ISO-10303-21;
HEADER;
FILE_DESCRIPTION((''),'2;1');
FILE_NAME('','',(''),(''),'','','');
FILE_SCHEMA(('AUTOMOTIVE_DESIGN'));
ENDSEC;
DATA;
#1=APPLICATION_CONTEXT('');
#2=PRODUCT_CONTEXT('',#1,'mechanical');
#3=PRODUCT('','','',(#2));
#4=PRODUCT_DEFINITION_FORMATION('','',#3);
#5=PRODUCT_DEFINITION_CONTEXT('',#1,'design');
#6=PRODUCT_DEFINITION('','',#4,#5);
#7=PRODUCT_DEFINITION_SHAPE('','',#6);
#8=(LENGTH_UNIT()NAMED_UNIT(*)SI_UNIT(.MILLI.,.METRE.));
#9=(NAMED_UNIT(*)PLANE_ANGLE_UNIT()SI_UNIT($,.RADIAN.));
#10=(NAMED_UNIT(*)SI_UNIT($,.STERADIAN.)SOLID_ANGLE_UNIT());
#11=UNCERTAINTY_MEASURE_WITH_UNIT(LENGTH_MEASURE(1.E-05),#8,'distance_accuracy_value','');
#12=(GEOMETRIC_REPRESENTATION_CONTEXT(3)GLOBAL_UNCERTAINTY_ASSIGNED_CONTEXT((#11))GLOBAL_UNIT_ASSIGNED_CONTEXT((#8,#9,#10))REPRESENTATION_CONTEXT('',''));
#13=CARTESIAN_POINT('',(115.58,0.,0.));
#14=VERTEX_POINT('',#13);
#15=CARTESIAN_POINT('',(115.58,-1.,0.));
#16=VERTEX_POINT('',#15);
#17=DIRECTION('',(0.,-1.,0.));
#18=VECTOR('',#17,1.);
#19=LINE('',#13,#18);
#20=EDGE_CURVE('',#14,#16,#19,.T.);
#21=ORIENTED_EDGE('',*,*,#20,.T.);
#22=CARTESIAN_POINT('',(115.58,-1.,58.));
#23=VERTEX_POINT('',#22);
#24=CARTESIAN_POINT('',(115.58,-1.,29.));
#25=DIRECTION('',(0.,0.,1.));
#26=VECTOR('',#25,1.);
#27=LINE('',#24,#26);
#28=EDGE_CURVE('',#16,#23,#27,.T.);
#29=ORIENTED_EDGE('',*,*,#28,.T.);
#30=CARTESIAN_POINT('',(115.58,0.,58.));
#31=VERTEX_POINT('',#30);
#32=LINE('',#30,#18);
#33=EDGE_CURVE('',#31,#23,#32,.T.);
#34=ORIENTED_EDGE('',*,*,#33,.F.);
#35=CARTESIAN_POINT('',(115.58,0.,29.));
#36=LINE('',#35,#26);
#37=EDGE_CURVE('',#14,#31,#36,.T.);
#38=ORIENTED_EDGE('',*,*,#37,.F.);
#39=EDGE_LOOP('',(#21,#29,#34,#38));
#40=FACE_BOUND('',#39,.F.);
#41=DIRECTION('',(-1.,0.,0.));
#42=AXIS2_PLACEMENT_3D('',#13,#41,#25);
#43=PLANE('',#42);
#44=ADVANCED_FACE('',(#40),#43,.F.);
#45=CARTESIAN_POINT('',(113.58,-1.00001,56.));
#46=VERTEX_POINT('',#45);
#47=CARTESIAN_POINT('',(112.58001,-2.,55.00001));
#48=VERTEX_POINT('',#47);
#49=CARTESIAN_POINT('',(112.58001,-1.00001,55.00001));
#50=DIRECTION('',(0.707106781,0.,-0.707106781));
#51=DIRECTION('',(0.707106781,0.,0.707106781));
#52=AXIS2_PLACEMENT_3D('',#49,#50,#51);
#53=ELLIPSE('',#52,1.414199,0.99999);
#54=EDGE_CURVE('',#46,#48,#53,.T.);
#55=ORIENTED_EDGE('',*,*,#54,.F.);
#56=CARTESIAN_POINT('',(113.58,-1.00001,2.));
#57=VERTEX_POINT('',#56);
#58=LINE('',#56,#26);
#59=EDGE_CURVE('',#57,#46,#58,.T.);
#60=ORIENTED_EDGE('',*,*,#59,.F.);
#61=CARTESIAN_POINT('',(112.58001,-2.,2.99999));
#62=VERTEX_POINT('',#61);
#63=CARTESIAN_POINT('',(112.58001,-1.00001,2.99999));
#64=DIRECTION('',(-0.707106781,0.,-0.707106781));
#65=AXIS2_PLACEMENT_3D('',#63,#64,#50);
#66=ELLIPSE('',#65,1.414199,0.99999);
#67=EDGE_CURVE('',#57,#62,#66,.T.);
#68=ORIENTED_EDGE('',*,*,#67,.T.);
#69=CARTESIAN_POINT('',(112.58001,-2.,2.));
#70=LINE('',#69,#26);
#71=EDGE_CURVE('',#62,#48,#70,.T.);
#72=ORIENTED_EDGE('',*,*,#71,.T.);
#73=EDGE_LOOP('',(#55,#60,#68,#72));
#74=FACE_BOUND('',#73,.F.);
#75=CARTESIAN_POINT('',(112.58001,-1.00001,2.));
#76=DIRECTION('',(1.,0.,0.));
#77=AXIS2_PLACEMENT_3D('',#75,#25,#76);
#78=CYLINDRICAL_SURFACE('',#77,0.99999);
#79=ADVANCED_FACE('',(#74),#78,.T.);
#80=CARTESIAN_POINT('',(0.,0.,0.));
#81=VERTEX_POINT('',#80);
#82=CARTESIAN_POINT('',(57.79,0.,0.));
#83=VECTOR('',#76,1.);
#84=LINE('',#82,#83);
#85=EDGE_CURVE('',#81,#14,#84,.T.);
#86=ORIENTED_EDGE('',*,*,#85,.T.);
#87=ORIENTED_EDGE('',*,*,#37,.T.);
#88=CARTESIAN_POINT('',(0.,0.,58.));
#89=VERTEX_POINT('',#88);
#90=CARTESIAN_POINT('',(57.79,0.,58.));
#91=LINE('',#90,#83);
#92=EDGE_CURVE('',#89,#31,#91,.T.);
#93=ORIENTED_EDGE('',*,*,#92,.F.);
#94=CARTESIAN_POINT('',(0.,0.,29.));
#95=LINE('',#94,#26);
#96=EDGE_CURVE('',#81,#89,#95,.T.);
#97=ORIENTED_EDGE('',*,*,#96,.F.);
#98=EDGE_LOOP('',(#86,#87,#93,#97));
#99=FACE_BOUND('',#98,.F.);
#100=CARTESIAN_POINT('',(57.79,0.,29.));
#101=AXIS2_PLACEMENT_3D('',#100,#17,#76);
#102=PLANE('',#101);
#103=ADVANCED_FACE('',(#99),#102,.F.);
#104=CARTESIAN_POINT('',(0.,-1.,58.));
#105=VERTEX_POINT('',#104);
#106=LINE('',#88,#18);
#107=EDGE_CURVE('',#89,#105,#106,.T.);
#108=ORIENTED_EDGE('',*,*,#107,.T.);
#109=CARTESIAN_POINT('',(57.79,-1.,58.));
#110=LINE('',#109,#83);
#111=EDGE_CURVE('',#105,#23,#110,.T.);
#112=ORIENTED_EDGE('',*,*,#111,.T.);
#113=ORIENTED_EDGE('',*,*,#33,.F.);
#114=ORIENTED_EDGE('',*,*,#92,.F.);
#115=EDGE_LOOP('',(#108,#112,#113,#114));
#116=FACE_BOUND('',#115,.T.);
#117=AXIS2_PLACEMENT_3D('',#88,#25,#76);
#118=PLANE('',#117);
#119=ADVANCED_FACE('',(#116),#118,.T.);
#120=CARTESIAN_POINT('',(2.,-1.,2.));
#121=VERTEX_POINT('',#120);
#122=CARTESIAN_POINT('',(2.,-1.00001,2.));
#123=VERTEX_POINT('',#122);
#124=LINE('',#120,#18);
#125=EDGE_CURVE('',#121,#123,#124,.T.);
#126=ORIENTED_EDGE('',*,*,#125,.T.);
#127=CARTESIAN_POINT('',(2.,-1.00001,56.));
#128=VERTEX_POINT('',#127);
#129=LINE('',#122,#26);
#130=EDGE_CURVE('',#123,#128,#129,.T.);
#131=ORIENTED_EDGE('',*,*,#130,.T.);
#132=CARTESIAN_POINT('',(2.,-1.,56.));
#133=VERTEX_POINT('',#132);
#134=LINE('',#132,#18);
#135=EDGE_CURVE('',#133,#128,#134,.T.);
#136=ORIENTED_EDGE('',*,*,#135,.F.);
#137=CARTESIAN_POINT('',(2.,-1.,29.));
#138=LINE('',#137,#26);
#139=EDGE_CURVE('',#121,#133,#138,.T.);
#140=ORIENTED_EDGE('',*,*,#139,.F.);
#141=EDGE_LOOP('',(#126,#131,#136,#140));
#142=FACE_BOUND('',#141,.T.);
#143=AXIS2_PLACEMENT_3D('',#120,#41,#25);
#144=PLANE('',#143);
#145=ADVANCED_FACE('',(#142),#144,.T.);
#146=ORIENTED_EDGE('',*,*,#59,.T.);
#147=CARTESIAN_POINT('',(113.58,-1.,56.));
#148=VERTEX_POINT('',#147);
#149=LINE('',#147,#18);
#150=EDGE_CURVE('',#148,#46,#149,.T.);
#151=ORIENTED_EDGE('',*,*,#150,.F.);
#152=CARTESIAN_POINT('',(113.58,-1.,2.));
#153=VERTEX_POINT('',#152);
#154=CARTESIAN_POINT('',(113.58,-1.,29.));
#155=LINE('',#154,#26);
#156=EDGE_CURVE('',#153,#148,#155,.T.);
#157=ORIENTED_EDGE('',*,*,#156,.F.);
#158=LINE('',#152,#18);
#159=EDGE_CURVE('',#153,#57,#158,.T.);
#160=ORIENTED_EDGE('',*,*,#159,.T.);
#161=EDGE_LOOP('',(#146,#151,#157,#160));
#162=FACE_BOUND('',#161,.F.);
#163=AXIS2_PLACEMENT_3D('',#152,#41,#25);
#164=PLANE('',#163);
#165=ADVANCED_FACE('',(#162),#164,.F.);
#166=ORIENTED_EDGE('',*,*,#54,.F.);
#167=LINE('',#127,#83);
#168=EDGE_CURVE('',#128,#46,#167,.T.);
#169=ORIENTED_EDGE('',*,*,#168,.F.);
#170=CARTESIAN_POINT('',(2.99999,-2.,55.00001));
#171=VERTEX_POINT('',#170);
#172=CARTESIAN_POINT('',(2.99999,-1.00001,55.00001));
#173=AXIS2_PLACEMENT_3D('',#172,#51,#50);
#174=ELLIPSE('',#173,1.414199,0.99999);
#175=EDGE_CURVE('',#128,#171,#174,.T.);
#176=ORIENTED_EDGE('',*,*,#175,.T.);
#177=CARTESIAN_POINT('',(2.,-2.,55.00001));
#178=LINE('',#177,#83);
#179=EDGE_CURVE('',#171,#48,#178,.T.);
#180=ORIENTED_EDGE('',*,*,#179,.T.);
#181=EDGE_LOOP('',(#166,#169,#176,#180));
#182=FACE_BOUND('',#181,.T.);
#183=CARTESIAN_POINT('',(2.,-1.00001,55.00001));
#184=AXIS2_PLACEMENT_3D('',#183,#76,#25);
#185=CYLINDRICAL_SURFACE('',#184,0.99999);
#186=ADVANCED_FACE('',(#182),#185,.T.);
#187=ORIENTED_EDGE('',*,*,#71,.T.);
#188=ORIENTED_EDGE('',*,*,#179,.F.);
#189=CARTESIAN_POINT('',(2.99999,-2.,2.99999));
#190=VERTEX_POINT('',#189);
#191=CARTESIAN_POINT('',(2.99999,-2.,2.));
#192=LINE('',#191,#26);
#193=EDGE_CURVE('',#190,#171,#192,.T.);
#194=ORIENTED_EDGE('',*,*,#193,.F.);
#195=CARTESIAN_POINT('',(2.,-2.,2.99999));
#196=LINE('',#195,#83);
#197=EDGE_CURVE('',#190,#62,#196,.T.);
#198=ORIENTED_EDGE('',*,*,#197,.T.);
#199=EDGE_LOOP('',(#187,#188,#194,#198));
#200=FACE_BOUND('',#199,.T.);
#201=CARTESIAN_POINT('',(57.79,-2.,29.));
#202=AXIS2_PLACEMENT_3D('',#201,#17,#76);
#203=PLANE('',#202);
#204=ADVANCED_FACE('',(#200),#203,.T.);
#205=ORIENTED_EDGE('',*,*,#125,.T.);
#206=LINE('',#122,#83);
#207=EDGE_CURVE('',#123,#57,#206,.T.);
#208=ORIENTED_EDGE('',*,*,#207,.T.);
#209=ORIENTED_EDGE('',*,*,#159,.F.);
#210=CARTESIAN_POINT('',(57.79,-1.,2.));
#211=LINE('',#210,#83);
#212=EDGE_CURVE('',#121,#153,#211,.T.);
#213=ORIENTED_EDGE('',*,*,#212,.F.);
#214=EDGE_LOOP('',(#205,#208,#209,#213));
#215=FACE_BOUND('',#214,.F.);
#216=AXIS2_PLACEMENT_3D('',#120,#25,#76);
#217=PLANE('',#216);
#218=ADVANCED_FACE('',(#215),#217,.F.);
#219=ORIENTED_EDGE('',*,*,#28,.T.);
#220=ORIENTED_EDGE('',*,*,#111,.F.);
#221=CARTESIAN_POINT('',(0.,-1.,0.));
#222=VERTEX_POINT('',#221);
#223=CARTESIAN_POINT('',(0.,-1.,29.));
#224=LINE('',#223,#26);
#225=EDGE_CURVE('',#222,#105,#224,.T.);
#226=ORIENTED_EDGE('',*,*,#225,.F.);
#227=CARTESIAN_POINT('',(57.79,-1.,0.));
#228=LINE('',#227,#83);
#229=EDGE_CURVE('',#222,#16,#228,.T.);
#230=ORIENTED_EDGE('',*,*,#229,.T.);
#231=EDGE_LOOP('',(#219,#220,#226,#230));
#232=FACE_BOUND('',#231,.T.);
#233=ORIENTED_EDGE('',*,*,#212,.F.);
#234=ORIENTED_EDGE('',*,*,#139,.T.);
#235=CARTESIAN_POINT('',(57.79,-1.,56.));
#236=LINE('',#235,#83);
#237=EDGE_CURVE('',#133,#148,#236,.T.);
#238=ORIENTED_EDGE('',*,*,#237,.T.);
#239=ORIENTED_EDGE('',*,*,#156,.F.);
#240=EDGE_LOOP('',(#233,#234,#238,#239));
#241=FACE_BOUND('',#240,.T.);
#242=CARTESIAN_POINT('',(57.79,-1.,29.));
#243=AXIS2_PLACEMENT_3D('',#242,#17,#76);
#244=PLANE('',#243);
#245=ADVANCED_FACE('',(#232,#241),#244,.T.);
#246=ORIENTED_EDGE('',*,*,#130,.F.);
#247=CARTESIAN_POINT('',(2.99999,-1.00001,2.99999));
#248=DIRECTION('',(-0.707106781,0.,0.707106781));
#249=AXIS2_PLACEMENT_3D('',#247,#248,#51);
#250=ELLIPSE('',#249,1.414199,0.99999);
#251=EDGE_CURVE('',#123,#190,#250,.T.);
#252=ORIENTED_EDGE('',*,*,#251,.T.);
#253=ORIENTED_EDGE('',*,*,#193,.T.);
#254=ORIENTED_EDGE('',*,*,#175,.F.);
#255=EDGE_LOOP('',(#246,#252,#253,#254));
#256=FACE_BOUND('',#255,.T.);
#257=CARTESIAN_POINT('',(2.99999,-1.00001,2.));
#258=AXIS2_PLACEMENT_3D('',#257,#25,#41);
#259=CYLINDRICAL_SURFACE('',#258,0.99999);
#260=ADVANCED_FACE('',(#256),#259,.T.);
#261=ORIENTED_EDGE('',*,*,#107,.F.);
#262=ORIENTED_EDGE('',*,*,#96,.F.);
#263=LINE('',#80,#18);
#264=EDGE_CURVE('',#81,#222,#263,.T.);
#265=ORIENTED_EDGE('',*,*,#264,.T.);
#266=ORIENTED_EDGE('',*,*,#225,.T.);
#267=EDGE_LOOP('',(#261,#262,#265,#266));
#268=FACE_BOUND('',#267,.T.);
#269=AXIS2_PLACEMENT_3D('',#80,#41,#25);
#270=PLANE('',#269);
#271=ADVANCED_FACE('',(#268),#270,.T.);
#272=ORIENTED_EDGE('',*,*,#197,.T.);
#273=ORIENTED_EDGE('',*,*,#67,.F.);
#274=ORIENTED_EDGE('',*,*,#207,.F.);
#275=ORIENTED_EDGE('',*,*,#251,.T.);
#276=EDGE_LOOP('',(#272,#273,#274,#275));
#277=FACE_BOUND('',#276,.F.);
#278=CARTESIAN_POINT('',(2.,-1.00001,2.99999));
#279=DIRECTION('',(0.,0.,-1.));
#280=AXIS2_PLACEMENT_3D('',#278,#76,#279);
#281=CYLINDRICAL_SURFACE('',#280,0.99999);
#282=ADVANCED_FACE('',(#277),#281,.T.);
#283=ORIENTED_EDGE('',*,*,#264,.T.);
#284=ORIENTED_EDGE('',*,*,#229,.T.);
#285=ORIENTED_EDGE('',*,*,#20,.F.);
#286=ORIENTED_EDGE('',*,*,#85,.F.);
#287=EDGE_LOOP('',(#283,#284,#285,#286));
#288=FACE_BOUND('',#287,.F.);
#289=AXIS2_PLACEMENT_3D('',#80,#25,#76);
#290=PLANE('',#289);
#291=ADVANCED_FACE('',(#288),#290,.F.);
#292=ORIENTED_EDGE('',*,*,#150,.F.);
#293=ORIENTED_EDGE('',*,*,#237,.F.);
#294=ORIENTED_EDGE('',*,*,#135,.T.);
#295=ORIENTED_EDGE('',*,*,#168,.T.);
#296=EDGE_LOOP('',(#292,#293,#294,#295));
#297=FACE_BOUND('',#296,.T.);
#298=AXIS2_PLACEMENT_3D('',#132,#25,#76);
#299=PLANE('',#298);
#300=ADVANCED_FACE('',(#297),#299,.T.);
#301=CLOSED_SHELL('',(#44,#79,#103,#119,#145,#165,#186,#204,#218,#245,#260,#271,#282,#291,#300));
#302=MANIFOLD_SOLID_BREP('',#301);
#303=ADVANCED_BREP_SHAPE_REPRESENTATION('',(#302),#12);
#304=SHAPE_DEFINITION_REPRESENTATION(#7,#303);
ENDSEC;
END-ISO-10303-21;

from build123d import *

# Parameters (mm, degrees)
F0_W     = 115.58
F0_H     = 58
F1_DEPTH = 1
F2_W     = 111.58
F2_H     = 54
F3_DEPTH = 1
F4_R     = 0.99999


# Not quite as in the source:
# - a fillet or chamfer is up to 0.001 mm smaller than in the source, because OpenCascade refuses the exact size
# - a feature names something its author has since deleted; it is built from what else it names


with BuildPart() as f1:
    # F0 (on Front) → F1 (new body)
    with BuildSketch(Plane.XZ):
        with Locations((57.79, 29)):
            Rectangle(F0_W, F0_H)
    extrude(amount=F1_DEPTH)

    # F2 (on face) → F3 (join)
    with BuildSketch(Plane.XZ.offset(1)):
        with Locations((57.79, 29)):
            Rectangle(F2_W, F2_H)
    extrude(amount=F3_DEPTH)

    # F4 (radius 1 in the source; OpenCascade refuses exactly that, so slightly less here)
    f4_edges = [f1.edges().sort_by_distance(p)[0] for p in [
        (57.79, -2, 56),
        (2, -2, 29),
        (57.79, -2, 2),
        (113.58, -2, 29),
    ]]
    fillet(f4_edges, radius=F4_R)


solid = f1.part
